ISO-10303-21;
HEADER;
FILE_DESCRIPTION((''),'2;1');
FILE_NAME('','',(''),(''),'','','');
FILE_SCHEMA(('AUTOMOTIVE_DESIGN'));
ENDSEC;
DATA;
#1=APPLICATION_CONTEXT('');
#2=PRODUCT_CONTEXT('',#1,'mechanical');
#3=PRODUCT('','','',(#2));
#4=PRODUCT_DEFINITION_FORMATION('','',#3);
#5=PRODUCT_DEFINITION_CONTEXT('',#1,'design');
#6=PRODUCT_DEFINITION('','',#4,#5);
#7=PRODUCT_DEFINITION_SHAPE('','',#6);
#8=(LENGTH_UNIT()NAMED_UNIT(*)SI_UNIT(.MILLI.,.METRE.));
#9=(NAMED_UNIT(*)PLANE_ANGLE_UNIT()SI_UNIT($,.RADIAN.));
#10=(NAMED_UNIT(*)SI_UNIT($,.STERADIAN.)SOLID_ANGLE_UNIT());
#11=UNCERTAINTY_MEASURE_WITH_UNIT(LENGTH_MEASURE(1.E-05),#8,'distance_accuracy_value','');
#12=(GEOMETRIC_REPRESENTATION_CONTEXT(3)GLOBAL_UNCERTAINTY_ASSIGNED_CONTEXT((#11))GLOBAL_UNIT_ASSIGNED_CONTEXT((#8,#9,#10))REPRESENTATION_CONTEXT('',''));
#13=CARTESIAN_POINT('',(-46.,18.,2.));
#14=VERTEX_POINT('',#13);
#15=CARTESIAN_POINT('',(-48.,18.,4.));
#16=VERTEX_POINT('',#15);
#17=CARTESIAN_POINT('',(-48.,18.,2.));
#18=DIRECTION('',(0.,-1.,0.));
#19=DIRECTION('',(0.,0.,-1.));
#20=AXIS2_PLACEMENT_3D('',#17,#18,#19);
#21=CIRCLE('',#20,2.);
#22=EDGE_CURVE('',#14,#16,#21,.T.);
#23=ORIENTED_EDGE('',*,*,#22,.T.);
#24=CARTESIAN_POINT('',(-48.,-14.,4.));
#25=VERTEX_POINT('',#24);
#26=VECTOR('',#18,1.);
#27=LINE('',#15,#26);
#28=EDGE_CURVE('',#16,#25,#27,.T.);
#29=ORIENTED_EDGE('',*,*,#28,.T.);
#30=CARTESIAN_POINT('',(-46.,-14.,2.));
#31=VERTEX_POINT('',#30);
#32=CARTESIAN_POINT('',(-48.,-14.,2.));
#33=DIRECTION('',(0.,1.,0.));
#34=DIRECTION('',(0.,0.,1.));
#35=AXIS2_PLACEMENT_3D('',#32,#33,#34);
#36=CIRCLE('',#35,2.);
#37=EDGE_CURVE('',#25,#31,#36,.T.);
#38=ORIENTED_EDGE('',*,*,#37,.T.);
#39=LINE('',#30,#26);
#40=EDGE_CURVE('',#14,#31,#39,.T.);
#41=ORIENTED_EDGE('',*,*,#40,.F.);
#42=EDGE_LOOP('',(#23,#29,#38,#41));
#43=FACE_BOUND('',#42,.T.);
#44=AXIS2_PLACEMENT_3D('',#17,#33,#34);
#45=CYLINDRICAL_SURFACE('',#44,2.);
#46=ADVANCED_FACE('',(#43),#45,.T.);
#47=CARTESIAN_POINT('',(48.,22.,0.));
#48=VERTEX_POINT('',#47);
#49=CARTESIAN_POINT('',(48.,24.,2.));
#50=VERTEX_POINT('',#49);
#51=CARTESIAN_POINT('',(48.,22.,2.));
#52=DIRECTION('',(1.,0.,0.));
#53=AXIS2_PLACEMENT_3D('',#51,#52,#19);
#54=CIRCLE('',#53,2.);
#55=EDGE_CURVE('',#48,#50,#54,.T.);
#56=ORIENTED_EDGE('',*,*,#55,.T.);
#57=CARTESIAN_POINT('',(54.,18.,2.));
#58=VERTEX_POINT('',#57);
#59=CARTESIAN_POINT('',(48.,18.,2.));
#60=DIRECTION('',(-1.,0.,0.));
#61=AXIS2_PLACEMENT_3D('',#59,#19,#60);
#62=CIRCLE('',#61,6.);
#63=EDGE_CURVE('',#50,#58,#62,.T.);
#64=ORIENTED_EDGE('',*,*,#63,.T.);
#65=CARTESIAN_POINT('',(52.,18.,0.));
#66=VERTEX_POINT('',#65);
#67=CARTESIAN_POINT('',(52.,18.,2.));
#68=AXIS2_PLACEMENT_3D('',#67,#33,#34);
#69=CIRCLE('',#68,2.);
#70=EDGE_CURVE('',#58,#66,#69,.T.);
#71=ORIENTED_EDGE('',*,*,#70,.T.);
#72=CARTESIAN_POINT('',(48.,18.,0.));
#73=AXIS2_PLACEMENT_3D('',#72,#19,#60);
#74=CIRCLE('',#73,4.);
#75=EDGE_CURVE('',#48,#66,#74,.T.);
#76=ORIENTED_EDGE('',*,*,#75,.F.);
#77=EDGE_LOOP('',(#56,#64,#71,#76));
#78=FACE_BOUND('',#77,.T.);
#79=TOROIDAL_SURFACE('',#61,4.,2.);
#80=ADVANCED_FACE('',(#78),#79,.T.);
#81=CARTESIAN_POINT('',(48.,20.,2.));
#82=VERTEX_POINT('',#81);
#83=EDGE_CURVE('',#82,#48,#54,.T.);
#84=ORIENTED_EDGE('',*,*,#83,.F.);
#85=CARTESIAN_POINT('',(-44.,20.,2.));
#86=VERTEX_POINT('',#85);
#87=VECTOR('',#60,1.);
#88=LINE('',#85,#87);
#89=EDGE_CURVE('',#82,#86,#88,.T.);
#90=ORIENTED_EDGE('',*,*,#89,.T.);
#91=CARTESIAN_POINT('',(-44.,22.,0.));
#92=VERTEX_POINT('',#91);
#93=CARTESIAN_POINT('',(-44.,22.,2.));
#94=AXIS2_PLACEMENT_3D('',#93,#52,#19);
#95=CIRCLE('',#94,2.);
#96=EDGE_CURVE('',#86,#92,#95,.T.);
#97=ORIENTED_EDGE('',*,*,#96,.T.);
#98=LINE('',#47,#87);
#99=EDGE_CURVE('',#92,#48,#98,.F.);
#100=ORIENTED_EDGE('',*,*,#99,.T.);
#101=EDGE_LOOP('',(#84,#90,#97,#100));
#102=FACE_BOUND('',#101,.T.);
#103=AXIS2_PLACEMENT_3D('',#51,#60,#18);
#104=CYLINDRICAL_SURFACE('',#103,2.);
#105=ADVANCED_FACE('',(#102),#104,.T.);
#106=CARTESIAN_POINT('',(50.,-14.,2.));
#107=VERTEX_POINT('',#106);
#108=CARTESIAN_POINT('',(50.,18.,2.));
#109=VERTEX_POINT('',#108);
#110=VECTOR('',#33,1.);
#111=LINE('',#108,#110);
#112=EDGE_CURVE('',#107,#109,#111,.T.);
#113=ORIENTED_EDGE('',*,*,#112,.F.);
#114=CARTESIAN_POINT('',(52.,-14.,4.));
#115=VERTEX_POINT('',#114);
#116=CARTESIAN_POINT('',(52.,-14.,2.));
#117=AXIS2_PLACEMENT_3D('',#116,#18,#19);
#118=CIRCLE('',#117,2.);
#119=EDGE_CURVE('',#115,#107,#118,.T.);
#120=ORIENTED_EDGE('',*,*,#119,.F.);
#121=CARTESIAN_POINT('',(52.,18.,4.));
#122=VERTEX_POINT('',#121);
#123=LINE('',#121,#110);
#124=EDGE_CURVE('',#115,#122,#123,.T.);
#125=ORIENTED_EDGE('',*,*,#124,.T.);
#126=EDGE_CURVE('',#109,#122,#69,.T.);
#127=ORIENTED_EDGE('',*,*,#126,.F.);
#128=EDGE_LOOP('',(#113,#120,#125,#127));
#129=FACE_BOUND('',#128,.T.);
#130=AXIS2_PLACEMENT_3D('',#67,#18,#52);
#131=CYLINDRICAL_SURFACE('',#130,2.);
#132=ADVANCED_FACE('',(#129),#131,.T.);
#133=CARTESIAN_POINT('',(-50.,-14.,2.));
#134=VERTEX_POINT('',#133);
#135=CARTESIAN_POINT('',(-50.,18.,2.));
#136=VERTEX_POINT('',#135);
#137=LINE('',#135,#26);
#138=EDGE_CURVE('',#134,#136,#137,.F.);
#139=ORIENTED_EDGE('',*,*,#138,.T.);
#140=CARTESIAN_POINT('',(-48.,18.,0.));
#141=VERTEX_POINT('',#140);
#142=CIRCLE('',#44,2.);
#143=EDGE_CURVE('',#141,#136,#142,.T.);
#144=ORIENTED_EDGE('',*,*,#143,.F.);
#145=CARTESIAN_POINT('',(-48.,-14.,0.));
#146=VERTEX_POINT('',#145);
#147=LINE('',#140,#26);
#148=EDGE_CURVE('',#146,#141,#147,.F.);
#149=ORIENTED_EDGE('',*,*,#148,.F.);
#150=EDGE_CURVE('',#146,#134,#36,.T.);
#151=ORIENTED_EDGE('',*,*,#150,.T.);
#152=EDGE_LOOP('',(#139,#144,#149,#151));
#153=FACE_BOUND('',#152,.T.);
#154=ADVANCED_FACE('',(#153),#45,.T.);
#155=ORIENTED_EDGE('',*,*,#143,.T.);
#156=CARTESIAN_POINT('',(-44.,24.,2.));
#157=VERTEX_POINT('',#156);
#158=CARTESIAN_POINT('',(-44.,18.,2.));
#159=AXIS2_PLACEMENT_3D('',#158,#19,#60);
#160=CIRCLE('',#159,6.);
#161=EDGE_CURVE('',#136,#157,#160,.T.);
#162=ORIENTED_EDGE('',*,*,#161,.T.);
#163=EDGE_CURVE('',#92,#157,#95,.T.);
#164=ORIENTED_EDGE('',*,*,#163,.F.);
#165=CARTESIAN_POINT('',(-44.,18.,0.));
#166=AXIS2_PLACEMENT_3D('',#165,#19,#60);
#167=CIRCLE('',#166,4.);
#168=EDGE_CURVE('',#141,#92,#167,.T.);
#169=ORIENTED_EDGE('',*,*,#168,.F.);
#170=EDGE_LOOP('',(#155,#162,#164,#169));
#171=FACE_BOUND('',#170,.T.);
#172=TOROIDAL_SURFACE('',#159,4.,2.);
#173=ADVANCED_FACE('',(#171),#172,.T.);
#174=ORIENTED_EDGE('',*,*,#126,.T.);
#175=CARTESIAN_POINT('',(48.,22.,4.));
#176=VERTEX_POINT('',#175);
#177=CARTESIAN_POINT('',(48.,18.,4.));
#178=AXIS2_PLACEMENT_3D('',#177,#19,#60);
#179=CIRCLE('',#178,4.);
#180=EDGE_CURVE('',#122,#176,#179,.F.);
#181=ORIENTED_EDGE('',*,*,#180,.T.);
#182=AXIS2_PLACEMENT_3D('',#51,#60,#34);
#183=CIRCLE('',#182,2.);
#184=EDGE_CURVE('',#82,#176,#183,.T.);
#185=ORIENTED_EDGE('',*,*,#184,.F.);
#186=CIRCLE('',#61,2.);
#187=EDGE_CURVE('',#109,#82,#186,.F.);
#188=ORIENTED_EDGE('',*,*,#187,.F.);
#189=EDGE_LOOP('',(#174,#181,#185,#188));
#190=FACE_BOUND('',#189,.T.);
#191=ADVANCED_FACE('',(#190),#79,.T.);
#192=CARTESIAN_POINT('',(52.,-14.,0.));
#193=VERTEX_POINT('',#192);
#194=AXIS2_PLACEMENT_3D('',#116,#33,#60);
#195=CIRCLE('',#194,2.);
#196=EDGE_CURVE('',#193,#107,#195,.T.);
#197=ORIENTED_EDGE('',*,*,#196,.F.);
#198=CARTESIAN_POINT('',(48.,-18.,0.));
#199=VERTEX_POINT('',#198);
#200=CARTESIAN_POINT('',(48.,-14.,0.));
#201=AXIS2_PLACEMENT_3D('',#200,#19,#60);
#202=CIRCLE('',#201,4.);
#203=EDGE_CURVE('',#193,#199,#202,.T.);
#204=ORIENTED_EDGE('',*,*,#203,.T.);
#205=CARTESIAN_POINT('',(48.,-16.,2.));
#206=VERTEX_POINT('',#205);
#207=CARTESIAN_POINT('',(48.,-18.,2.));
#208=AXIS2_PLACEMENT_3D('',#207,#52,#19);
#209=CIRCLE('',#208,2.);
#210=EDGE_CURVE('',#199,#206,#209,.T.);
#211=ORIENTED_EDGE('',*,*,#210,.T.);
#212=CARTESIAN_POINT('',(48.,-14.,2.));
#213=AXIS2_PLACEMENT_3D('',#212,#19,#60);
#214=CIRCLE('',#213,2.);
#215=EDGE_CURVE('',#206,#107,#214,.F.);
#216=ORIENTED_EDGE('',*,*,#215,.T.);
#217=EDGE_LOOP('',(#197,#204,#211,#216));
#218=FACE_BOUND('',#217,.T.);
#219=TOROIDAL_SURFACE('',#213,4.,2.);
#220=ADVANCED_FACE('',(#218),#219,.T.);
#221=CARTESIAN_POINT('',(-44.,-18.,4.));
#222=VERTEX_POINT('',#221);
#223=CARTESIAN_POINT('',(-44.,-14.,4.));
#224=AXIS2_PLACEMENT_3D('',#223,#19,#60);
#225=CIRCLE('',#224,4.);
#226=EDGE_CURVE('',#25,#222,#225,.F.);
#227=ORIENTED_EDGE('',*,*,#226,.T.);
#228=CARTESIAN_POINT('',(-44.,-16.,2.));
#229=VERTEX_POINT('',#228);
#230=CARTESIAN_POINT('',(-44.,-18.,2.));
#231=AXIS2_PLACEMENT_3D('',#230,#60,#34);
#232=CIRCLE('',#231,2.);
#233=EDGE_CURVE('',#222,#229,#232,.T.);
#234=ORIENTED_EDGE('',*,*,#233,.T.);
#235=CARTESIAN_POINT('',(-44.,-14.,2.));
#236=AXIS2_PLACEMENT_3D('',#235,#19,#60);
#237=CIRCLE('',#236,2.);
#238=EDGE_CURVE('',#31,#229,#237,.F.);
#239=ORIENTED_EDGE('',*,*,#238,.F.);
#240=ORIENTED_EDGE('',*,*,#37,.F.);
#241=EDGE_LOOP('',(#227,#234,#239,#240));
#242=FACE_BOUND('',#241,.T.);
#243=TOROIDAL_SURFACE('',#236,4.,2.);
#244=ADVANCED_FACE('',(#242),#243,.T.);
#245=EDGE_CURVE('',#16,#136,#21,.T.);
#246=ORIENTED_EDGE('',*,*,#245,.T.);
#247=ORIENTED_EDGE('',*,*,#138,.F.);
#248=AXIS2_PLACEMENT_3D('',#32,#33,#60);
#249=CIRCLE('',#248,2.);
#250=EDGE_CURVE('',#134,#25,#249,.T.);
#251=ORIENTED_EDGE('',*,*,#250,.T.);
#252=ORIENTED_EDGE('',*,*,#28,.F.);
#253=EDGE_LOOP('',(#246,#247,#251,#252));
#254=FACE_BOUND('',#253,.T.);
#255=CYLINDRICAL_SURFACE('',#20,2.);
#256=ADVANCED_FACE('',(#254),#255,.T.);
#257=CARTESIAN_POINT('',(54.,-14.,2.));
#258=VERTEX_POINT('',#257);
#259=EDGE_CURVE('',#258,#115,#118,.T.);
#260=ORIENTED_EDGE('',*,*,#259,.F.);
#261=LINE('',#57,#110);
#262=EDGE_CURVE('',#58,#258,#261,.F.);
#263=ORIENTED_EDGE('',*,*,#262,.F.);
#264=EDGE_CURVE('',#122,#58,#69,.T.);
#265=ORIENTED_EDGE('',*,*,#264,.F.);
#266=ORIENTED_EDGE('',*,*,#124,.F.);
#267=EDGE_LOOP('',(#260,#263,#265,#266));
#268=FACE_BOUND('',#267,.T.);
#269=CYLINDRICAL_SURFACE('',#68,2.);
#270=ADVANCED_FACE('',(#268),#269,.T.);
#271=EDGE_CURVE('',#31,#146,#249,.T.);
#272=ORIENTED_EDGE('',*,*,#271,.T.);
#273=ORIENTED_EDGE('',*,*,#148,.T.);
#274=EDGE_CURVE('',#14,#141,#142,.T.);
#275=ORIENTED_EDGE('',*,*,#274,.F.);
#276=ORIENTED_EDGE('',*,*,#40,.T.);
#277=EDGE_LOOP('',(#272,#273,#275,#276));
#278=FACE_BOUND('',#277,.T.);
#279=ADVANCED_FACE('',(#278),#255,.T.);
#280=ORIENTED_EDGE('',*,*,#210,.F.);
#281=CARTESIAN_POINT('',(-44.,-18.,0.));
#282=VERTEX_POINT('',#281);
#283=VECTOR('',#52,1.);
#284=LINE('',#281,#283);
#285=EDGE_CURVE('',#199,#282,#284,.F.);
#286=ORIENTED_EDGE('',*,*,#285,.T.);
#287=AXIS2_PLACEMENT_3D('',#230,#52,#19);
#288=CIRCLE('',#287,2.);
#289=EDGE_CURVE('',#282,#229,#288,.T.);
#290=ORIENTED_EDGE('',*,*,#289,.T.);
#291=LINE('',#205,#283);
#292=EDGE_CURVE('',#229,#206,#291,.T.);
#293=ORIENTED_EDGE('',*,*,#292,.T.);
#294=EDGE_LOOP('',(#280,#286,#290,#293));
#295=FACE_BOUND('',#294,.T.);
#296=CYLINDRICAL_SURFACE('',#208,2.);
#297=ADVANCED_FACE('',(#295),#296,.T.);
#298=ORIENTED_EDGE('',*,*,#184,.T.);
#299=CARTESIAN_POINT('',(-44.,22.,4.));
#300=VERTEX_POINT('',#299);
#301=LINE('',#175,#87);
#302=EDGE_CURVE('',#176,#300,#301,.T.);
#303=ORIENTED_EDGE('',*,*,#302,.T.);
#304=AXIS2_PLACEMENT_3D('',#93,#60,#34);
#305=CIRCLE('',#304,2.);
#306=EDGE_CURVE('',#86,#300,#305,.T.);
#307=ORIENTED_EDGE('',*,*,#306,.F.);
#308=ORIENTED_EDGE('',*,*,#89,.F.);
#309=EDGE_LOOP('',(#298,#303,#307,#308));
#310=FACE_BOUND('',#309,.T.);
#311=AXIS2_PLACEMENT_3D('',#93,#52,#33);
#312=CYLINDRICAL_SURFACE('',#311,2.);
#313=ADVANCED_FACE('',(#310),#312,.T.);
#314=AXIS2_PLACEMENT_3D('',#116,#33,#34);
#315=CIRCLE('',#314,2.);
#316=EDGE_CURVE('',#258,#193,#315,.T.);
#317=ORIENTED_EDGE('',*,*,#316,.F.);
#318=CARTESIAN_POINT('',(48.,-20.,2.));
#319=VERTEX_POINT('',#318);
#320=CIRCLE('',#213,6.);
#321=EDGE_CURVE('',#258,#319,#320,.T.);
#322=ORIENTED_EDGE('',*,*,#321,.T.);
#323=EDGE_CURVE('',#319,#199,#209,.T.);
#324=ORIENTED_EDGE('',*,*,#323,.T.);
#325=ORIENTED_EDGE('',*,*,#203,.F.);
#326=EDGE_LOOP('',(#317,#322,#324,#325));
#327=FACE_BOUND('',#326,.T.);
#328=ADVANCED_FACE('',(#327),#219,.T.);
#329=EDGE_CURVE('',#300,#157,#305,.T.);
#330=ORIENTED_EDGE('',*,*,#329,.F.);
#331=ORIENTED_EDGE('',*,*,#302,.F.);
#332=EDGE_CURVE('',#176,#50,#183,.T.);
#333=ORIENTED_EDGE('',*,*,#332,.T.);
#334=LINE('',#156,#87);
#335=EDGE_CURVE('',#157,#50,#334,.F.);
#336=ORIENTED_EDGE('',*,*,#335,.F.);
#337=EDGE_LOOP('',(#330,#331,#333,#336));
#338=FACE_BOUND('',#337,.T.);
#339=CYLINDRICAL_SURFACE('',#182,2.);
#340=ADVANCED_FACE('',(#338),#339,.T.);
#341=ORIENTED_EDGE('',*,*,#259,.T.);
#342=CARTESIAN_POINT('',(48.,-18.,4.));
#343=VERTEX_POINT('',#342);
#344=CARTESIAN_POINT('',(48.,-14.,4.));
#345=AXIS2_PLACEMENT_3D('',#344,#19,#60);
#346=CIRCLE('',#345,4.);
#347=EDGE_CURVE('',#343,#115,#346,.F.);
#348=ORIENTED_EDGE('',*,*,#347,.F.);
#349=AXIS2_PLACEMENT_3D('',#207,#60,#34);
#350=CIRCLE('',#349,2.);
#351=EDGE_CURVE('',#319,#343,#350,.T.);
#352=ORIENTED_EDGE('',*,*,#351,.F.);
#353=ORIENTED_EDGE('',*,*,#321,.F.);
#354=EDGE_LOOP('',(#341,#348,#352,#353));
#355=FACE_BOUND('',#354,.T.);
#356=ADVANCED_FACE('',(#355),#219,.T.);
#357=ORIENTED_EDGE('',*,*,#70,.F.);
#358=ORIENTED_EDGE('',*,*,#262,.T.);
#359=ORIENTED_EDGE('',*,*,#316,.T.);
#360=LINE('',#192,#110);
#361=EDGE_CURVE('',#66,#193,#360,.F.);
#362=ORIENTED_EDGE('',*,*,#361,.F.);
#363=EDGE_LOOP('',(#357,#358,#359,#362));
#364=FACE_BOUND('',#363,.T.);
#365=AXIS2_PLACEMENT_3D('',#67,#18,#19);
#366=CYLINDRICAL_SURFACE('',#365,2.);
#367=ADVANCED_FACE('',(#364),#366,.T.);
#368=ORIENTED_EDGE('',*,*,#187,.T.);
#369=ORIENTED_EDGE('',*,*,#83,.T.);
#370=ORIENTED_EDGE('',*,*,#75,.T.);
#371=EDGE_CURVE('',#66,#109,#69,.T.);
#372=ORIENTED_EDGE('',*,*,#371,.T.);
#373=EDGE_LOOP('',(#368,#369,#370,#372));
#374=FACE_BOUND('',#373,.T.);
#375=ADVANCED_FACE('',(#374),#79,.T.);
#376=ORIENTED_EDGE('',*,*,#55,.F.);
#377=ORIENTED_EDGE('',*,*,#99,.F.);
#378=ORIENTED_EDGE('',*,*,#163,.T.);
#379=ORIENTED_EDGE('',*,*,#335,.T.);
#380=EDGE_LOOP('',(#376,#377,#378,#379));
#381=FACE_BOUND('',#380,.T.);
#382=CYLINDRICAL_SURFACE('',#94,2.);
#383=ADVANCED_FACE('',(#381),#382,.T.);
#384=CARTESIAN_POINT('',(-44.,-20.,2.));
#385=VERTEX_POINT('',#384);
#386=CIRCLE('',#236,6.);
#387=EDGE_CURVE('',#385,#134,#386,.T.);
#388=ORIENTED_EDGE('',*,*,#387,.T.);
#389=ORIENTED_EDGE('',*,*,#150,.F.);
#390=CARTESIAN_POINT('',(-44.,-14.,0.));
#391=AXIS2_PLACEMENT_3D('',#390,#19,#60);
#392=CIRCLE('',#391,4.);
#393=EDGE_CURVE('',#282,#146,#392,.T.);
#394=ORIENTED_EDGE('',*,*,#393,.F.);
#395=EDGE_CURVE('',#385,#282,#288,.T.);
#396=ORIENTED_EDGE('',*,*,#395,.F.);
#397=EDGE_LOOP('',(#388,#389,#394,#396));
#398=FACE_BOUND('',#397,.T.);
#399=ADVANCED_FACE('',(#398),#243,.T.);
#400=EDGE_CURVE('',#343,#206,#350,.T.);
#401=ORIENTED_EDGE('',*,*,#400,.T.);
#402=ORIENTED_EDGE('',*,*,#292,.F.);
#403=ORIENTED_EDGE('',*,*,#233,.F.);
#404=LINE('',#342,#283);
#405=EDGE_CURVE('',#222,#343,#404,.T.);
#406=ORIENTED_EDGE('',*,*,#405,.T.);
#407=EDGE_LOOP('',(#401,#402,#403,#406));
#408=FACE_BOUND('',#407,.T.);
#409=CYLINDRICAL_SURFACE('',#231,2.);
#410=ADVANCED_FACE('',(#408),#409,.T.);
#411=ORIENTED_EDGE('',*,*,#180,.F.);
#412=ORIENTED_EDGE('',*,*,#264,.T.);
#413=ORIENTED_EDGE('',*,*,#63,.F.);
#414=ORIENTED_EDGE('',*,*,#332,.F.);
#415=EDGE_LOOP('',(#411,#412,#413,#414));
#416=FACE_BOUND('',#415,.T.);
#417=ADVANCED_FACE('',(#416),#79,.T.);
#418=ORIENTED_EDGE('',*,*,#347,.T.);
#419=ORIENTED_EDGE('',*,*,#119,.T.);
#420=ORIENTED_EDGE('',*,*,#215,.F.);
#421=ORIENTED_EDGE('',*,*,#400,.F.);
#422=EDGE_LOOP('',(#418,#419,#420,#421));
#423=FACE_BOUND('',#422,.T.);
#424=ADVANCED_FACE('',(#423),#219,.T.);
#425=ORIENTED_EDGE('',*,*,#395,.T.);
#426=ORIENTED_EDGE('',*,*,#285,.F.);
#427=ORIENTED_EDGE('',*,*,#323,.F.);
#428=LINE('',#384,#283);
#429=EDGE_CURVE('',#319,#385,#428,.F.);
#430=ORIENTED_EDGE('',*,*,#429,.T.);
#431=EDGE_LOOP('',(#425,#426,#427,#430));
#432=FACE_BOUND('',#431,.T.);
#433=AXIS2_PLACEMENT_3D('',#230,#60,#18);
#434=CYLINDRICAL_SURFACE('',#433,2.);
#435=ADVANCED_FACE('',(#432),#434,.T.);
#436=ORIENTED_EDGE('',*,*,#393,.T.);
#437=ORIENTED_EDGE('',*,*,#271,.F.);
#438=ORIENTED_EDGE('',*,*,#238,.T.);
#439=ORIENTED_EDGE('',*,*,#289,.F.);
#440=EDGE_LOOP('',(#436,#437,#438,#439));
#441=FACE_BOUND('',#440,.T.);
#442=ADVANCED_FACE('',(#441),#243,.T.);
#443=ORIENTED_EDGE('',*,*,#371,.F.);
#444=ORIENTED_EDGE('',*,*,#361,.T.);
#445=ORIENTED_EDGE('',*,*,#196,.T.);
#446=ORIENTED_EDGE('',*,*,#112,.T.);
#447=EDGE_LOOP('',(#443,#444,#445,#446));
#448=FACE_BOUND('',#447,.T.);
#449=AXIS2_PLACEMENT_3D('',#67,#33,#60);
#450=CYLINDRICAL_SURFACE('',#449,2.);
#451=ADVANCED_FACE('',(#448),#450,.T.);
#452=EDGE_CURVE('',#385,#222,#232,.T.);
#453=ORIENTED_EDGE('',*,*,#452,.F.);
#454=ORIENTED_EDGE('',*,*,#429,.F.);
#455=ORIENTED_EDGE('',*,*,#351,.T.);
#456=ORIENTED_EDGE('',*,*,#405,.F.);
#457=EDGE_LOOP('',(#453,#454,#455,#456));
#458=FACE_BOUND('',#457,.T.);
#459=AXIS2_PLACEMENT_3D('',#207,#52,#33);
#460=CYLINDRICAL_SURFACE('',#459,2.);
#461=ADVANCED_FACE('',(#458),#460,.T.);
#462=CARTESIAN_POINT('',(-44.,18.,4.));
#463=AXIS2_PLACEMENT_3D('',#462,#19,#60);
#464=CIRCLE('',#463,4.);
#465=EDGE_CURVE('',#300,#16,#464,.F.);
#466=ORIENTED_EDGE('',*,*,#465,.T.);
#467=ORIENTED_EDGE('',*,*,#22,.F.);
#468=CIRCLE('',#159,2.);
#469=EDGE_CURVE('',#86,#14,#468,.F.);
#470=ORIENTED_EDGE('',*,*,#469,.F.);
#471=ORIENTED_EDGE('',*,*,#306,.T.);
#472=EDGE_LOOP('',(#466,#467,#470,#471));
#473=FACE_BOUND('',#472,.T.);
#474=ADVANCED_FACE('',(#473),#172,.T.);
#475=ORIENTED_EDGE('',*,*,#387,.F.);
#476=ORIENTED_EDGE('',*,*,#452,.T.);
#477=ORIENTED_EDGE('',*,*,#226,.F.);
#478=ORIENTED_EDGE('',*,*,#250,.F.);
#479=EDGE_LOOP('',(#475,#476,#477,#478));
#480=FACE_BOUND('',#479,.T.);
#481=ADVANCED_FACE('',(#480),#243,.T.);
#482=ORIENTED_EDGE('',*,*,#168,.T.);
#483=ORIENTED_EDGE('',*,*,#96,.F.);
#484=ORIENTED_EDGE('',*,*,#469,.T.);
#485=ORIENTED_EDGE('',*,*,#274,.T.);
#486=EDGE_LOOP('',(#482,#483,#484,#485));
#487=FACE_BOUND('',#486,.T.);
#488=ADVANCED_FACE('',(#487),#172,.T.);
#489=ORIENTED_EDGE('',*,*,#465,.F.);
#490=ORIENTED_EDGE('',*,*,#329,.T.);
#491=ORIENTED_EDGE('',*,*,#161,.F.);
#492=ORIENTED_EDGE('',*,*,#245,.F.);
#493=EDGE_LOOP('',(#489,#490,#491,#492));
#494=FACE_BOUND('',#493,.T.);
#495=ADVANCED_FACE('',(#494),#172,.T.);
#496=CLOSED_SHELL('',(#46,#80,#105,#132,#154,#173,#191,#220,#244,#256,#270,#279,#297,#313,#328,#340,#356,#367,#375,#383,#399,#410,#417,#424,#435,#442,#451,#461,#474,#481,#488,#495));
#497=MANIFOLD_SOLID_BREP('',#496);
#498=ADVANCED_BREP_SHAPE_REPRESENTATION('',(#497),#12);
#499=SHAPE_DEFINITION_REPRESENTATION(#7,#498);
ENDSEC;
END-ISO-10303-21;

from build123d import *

# Parameters (mm, degrees)
BOSS_EXTRUDE1_DEPTH = 4
FILLET1_R           = 2
FILLET2_R           = 2


with BuildPart() as part:
    # Sketch1 → Boss-Extrude1 (new body)
    with BuildSketch(Plane.XY):
        with BuildLine():
            Line((54, 18), (54, -14))
            ThreePointArc((54, -14), (52.242640687, -18.242640687), (48, -20))
            Line((48, -20), (-44, -20))
            ThreePointArc((-44, -20), (-48.242640687, -18.242640687), (-50, -14))
            Line((-50, -14), (-50, 18))
            ThreePointArc((-50, 18), (-48.242640687, 22.242640687), (-44, 24))
            Line((-44, 24), (48, 24))
            ThreePointArc((48, 24), (52.242640687, 22.242640687), (54, 18))
        make_face()
        with BuildLine():
            Line((50, 18), (50, -14))
            ThreePointArc((50, -14), (49.414213562, -15.414213562), (48, -16))
            Line((48, -16), (-44, -16))
            ThreePointArc((-44, -16), (-45.414213562, -15.414213562), (-46, -14))
            Line((-46, -14), (-46, 18))
            ThreePointArc((-46, 18), (-45.414213562, 19.414213562), (-44, 20))
            Line((-44, 20), (48, 20))
            ThreePointArc((48, 20), (49.414213562, 19.414213562), (50, 18))
        make_face(mode=Mode.SUBTRACT)
    extrude(amount=BOSS_EXTRUDE1_DEPTH)

    # Fillet1
    fillet1_edges = [part.edges().sort_by_distance(p)[0] for p in [
        (-48.242640687, 22.242640687, 4),
        (-50, 2, 4),
        (-48.242640687, -18.242640687, 4),
        (2, -20, 4),
        (52.242640687, -18.242640687, 4),
        (-45.414213562, 19.414213562, 4),
        (-46, 2, 4),
        (-45.414213562, -15.414213562, 4),
        (2, -16, 4),
        (49.414213562, -15.414213562, 4),
        (50, 2, 4),
        (49.414213562, 19.414213562, 4),
        (54, 2, 4),
        (2, 20, 4),
        (52.242640687, 22.242640687, 4),
        (2, 24, 4),
    ]]
    fillet(fillet1_edges, radius=FILLET1_R - 0.0001)  # a hair under: the kernel refuses the full size

    # Fillet2
    fillet2_edges = [part.edges().sort_by_distance(p)[0] for p in [
        (49.414213562, 19.414213562, 0),
        (50, 2, 0),
        (49.414213562, -15.414213562, 0),
        (2, -16, 0),
        (-45.414213562, -15.414213562, 0),
        (-46, 2, 0),
        (-45.414213562, 19.414213562, 0),
        (2, 20, 0),
        (2, 24, 0),
        (-48.242640687, 22.242640687, 0),
        (-50, 2, 0),
        (-48.242640687, -18.242640687, 0),
        (2, -20, 0),
        (52.242640687, -18.242640687, 0),
        (54, 2, 0),
        (52.242640687, 22.242640687, 0),
    ]]
    fillet(fillet2_edges, radius=FILLET2_R - 0.0001)  # a hair under: the kernel refuses the full size


solid = part.part
